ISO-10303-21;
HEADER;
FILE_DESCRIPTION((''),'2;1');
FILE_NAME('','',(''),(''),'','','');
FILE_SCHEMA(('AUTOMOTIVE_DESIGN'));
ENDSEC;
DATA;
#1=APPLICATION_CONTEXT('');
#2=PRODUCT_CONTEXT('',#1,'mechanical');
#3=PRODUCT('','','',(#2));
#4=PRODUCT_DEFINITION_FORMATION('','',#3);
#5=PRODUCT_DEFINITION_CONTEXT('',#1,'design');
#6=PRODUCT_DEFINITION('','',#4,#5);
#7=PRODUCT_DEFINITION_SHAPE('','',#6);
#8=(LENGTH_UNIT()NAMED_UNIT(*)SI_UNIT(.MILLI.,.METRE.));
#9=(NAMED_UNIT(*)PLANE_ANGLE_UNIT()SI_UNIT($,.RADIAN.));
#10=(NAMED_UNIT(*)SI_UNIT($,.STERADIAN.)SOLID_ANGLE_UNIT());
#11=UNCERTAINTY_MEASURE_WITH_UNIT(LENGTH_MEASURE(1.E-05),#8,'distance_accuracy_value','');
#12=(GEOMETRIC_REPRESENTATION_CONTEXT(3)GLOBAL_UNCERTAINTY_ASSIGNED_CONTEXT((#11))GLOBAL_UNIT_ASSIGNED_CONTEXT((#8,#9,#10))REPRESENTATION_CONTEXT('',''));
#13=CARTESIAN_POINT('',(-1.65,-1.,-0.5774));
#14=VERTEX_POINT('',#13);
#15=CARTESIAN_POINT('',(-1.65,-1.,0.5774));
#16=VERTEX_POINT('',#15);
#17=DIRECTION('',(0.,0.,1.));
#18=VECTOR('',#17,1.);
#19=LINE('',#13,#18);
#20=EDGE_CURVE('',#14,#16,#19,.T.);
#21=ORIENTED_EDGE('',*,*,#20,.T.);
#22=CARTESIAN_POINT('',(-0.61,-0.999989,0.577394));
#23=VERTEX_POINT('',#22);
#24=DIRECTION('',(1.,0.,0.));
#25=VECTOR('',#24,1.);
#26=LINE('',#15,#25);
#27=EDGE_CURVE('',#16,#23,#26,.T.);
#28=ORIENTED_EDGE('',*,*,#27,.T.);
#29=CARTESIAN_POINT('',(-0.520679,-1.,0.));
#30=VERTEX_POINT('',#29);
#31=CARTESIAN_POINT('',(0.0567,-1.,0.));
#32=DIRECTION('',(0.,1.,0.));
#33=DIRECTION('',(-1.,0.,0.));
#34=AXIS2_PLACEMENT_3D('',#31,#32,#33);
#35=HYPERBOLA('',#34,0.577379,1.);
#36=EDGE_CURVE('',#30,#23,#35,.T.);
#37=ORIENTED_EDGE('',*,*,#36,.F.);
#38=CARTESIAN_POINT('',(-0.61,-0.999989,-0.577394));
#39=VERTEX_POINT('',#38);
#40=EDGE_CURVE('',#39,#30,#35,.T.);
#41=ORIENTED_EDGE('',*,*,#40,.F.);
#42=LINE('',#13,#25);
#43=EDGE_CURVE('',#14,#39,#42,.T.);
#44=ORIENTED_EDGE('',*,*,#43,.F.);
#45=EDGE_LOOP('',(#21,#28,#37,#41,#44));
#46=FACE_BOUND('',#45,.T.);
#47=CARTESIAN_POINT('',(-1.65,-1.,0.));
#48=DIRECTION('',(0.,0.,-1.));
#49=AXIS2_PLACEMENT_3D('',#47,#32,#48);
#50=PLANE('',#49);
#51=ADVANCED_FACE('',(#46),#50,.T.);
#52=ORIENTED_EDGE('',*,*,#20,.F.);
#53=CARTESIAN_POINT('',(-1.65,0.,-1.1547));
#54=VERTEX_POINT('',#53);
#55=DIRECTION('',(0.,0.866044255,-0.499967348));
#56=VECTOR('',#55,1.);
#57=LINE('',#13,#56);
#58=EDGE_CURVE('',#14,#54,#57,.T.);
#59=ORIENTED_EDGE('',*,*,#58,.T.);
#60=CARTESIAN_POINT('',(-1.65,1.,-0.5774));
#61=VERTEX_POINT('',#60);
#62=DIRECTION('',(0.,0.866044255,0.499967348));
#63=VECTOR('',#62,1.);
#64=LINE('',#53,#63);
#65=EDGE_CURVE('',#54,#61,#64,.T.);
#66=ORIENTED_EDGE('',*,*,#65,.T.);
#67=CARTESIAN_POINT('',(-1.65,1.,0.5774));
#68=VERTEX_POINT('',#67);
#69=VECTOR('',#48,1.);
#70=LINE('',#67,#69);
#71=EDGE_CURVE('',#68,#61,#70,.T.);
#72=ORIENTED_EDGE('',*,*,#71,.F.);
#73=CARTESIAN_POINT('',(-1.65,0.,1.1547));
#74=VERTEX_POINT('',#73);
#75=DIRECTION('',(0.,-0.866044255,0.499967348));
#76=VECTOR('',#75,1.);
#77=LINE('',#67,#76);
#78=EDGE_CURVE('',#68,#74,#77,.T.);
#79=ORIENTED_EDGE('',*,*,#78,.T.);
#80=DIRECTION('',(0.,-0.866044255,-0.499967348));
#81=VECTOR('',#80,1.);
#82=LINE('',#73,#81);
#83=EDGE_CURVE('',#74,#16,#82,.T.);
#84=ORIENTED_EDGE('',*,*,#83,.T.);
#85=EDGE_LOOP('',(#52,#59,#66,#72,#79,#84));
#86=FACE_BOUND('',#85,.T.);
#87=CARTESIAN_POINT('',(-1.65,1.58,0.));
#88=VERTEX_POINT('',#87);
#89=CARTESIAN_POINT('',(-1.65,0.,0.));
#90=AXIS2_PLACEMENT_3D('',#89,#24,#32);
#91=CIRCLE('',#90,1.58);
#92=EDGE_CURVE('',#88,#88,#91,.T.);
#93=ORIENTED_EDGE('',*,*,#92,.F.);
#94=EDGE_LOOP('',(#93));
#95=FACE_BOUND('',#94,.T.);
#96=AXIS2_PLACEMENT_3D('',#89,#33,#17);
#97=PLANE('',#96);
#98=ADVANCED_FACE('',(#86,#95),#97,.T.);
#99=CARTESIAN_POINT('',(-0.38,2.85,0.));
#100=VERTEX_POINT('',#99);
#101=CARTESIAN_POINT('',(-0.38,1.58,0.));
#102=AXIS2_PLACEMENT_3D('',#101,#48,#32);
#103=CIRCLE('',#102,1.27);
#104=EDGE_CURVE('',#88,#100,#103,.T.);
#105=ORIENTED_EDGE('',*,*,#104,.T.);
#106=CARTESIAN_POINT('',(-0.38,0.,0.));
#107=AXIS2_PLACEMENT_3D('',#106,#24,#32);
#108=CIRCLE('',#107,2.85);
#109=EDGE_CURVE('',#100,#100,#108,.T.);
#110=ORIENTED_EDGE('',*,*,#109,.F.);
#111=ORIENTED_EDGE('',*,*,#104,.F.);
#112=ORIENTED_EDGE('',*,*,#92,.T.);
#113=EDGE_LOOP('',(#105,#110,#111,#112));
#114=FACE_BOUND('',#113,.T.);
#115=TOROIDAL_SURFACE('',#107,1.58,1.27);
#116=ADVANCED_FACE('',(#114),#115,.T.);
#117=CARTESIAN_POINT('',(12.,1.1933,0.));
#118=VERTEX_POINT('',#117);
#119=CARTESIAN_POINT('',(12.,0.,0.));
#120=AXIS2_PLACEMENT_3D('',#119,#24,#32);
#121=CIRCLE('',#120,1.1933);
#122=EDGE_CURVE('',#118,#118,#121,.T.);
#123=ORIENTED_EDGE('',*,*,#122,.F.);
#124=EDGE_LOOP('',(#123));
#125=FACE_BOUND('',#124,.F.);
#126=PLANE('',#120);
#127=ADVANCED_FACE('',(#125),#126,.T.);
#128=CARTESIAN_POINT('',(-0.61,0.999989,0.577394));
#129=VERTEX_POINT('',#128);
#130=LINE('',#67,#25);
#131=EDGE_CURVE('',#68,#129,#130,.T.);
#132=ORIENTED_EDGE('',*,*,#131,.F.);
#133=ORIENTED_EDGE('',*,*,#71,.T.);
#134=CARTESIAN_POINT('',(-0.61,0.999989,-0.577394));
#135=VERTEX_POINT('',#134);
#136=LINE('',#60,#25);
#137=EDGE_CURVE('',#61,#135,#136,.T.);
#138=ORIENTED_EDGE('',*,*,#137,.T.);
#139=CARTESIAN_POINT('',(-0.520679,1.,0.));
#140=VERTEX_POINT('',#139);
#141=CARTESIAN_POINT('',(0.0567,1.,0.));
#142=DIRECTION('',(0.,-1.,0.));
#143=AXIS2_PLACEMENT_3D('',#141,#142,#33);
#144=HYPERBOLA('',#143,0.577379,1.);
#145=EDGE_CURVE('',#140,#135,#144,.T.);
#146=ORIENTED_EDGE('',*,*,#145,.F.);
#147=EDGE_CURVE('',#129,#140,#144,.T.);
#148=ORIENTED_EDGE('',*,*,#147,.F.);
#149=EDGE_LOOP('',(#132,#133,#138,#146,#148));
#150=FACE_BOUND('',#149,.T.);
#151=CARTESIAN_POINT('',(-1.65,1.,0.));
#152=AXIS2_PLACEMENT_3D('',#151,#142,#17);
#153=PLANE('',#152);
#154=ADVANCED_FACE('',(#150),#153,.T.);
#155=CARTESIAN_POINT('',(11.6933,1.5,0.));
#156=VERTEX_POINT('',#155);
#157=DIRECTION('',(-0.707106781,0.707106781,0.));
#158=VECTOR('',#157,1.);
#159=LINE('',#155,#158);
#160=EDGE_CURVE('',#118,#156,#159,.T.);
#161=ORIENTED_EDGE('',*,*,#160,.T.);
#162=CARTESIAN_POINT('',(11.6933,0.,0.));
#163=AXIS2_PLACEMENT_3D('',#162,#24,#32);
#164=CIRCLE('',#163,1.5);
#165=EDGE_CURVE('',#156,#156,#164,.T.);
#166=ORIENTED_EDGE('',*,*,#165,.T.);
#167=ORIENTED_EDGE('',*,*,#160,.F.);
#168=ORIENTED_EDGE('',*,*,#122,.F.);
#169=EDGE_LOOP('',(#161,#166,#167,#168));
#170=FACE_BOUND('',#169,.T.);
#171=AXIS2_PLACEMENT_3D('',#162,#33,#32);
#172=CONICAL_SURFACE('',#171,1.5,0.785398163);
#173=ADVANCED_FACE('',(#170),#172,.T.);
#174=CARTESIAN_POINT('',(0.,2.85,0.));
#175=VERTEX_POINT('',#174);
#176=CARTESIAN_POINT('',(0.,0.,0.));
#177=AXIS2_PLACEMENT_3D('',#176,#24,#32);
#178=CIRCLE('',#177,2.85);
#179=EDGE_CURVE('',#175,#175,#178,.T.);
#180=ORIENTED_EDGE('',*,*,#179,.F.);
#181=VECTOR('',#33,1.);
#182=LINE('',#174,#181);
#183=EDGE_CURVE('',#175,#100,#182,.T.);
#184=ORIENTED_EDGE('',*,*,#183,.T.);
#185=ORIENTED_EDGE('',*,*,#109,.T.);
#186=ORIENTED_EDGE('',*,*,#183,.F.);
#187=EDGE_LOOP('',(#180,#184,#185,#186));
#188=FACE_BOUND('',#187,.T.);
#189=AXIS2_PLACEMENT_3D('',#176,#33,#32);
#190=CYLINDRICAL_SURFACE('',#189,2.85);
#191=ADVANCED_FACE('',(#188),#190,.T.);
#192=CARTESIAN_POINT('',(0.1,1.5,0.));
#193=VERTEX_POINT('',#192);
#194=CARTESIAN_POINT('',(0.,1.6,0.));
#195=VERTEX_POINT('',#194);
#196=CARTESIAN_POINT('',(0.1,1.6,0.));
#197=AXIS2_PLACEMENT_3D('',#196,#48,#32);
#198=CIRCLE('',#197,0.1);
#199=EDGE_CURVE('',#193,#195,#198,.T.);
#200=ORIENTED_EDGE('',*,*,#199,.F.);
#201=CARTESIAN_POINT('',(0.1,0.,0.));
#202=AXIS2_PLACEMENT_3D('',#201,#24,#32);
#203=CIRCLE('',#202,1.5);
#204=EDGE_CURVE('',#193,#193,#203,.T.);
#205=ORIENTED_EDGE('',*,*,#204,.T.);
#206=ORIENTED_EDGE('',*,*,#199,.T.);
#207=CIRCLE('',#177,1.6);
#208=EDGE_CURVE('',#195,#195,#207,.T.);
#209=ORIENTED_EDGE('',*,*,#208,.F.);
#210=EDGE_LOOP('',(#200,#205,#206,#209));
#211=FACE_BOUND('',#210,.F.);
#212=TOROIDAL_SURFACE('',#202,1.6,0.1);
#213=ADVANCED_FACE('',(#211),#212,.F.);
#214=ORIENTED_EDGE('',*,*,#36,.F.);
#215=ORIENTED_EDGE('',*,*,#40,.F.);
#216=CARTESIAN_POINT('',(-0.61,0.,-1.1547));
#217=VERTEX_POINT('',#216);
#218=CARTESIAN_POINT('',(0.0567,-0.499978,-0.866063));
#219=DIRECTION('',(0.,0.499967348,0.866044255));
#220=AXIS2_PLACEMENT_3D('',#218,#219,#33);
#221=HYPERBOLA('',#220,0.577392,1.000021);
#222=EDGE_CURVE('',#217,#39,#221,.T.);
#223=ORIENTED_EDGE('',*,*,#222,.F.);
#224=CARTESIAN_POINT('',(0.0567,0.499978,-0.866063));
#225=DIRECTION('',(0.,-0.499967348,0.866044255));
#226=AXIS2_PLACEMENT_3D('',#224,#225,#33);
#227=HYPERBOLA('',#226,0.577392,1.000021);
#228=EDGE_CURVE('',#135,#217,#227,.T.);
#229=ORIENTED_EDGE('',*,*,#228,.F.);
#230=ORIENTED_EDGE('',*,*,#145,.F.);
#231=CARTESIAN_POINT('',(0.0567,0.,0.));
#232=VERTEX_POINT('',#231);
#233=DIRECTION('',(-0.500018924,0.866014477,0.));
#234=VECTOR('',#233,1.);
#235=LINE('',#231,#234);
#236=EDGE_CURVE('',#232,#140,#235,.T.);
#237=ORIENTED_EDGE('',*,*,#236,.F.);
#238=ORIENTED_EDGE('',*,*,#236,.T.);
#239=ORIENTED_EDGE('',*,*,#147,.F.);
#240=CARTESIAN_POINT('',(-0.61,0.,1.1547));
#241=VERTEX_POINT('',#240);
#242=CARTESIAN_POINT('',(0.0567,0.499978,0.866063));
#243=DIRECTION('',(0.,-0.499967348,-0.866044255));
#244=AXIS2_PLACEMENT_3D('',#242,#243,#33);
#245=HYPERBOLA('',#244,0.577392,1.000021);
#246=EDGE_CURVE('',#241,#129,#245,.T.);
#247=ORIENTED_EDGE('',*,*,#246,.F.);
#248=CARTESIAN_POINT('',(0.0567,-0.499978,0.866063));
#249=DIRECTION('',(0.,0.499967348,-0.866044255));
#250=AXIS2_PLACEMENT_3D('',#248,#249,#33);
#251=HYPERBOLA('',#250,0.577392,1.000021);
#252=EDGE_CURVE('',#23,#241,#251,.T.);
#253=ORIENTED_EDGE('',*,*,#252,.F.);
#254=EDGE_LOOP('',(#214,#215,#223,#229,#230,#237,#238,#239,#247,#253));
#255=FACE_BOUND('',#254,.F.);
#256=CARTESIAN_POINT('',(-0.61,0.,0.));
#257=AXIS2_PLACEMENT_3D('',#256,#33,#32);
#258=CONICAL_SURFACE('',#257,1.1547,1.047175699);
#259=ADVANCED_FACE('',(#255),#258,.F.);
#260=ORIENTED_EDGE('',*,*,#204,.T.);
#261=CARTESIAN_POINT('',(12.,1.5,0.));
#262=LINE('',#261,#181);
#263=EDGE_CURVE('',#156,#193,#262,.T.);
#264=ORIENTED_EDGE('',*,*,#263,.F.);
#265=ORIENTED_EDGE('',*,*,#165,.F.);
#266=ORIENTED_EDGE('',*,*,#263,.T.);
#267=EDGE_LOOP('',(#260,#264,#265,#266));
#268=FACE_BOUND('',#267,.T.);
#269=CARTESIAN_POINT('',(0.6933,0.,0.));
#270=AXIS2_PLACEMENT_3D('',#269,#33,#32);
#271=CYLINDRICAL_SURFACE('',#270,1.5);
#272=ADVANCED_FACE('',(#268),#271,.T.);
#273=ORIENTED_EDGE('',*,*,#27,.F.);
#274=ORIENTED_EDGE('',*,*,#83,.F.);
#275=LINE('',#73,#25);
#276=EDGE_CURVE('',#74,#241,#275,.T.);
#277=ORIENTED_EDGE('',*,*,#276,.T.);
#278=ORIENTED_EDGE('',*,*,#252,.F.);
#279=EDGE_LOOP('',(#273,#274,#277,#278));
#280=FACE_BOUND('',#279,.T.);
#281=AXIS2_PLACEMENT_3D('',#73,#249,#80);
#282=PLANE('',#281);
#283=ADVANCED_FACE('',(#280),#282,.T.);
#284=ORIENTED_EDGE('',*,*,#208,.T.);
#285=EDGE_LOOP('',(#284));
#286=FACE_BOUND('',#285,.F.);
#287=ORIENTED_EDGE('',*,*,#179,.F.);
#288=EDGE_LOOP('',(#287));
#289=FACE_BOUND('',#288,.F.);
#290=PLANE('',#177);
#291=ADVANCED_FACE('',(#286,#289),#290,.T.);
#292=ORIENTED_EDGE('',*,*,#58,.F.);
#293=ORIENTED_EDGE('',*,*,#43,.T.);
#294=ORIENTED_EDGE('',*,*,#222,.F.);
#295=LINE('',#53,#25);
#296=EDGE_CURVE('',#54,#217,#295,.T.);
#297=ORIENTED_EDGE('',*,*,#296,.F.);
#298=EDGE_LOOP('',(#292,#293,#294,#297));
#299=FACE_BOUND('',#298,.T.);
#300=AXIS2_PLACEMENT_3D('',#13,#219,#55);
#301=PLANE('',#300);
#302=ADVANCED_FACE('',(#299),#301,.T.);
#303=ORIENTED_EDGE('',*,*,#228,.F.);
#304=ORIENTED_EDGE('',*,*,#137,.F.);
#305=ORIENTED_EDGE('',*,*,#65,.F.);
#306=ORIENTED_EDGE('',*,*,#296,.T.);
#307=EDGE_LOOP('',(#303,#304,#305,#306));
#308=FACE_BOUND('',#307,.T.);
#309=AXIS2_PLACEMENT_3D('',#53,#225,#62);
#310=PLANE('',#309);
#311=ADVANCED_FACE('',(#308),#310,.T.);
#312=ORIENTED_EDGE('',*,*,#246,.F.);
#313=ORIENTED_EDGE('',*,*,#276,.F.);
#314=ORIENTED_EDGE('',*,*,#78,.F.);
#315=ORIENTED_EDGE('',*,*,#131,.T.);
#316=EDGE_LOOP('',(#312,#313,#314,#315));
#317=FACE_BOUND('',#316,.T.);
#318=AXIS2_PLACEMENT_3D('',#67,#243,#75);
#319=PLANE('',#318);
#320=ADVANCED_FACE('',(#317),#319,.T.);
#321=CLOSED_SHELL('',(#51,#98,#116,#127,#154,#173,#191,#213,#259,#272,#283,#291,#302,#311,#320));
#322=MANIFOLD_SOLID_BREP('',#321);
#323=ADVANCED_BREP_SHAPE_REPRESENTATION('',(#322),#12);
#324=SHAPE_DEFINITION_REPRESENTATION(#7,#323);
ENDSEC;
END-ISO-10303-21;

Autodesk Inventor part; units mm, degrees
ref_plane "YZ Plane" through (0, 0, 0) normal (1, 0, 0) x (0, 1, 0)
ref_plane "XZ Plane" through (0, 0, 0) normal (0, 1, 0) x (-1, 0, 0)
sketch "Skizze1" plane through (0, 0, 0) normal (0, 0, 1) x (1, 0, 0)
  line L0 (0.0567, 0) -> (12, 0)
  line L1 (12, 0) -> (12, 1.5)
  line L2 (12, 1.5) -> (1, 1.5)
  line L3 (1, 1.5) -> (0.6933, 1.5)
  line L4 (0.6933, 1.5) -> (0, 1.5)
  line L5 (0, 1.5) -> (0, 2.85)
  line L6 (0, 2.85) -> (-1.65, 2.85)
  line L7 (-1.65, 2.85) -> (-1.65, 1.1547)
  line L8 (-1.65, 1.1547) -> (-0.61, 1.1547)
  line L9 (-0.61, 1.1547) -> (0.0567, 0)
  line L10 (-4.38, 0) -> (14.73, 0) projected
  line L11 (0, -0.57) -> (0, 3.42) projected
  line L12 (1, 1.5) -> (0, 1.5) construction
  dimension "d0" = 11
  dimension "d1" = 0.3067
  dimension "d2" = 1.65
  dimension "d3" = 1.04
  dimension "d4" = 60
  dimension "d5" = 3
  dimension "d6" = 3
  dimension "d7" = 2.3094
  dimension "d8" = 5.7
  dimension "d19" = 12
revolve "Körper" add sketch "Skizze1" angle 360 about axis through (0.0567, 0, 0) along (1, 0, 0) contours L9 L11 L4 L3 L2 L1 L0 | L9 L8 L7 L6 L5 L11
sketch "Skizze2" plane through (-1.65, 0, 0) normal (-1, 0, 0) x (0, 0, 1)
  circle A0 centre (0, 0) radius 1.1547 projected
  line L0 (0, -3.99) -> (0, 3.99) projected
  line L1 (-3.99, 0) -> (3.99, 0) projected
  line L2 (1.1547, 0) -> (0.5774, -1)
  line L3 (0.5774, -1) -> (-0.5774, -1)
  line L4 (-0.5774, -1) -> (-1.1547, 0)
  line L5 (-1.1547, 0) -> (-0.5774, 1)
  line L6 (-0.5774, 1) -> (0.5774, 1)
  line L7 (0.5774, 1) -> (1.1547, 0)
extrude "Loch" add sketch "Skizze2" against normal up to next contours L7 A0 | A0 L2 | L6 L0 A0 | A0 L0 L3 | L0 L6 A0 | A0 L3 L0 | L4 A0 | A0 L5
fillet "Rundung1" radius 1.27 1 edges at (-1.65, -2.85, 0)
thread "Gewinde" size "M3x0.5" class "4g6g" standard "ANSI Metric M Profile" length 11
chamfer "Fase1" distance 0.3067 distance2 0.3067 1 edges at (12, -1.5, 0) measured on face at (12, -0.6587, -0.1791)
fillet "Rundung2" radius 0.1 1 edges at (0, -1.5, 0)
ref_plane "Work Plane1" through (30, 0, 0) normal (0, -0.5, 0.8660254) x (1, 0, 0)
equation "\"d0\" = GEL"
equation "\"d1\" = GAL"
equation "\"d2\" = KOH"
equation "\"d3\" = INTI"
equation "\"d5\" = GD"
equation "\"d6\" = BDM"
equation "\"d7\" = 1.1547 * SW"
equation "\"d8\" = KOD"
equation "\"d19\" = NLG"
equation "\"d16\" = RR"
equation "\"d12\" = GEL"
equation "\"d14\" = -0.5 * SPD + 0.5 * GD"
equation "\"d15\" = GUL"
equation "\"d29\" = R"
equation "\"GD\" = NND"
equation "\"NLG\" = 12"
equation "\"GEL\" = 11"
equation "\"KOD\" = 5.7"
equation "\"KOH\" = 1.65"
equation "\"INTI\" = 1.04"
equation "\"GAL\" = 0.61345 * PTC"
equation "\"GUL\" = 0.61345 * PTC"
equation "\"BDM\" = NND"
equation "\"SW\" = 2"
equation "\"RR\" = 1.27"
equation "\"SPD\" = 2.38655"
equation "\"d28\" = R"
equation "\"R\" = 0.1"
equation "\"TOA\" = 30deg"
equation "\"THREADDIA\" = 3"
equation "\"KOD1\" = KOD - 2 * RR"
equation "\"PTC\" = 0.5"
equation "\"NND\" = 3"
equation "\"E0\" = 1.155 * SW"
equation "\"GD1\" = THREADDIA - 1.2269 * PTC"
properties part number "ANSI B18.3.4M - M3 x 0.5 x 12, FHSBHCSM" material "Steel, Mild"
